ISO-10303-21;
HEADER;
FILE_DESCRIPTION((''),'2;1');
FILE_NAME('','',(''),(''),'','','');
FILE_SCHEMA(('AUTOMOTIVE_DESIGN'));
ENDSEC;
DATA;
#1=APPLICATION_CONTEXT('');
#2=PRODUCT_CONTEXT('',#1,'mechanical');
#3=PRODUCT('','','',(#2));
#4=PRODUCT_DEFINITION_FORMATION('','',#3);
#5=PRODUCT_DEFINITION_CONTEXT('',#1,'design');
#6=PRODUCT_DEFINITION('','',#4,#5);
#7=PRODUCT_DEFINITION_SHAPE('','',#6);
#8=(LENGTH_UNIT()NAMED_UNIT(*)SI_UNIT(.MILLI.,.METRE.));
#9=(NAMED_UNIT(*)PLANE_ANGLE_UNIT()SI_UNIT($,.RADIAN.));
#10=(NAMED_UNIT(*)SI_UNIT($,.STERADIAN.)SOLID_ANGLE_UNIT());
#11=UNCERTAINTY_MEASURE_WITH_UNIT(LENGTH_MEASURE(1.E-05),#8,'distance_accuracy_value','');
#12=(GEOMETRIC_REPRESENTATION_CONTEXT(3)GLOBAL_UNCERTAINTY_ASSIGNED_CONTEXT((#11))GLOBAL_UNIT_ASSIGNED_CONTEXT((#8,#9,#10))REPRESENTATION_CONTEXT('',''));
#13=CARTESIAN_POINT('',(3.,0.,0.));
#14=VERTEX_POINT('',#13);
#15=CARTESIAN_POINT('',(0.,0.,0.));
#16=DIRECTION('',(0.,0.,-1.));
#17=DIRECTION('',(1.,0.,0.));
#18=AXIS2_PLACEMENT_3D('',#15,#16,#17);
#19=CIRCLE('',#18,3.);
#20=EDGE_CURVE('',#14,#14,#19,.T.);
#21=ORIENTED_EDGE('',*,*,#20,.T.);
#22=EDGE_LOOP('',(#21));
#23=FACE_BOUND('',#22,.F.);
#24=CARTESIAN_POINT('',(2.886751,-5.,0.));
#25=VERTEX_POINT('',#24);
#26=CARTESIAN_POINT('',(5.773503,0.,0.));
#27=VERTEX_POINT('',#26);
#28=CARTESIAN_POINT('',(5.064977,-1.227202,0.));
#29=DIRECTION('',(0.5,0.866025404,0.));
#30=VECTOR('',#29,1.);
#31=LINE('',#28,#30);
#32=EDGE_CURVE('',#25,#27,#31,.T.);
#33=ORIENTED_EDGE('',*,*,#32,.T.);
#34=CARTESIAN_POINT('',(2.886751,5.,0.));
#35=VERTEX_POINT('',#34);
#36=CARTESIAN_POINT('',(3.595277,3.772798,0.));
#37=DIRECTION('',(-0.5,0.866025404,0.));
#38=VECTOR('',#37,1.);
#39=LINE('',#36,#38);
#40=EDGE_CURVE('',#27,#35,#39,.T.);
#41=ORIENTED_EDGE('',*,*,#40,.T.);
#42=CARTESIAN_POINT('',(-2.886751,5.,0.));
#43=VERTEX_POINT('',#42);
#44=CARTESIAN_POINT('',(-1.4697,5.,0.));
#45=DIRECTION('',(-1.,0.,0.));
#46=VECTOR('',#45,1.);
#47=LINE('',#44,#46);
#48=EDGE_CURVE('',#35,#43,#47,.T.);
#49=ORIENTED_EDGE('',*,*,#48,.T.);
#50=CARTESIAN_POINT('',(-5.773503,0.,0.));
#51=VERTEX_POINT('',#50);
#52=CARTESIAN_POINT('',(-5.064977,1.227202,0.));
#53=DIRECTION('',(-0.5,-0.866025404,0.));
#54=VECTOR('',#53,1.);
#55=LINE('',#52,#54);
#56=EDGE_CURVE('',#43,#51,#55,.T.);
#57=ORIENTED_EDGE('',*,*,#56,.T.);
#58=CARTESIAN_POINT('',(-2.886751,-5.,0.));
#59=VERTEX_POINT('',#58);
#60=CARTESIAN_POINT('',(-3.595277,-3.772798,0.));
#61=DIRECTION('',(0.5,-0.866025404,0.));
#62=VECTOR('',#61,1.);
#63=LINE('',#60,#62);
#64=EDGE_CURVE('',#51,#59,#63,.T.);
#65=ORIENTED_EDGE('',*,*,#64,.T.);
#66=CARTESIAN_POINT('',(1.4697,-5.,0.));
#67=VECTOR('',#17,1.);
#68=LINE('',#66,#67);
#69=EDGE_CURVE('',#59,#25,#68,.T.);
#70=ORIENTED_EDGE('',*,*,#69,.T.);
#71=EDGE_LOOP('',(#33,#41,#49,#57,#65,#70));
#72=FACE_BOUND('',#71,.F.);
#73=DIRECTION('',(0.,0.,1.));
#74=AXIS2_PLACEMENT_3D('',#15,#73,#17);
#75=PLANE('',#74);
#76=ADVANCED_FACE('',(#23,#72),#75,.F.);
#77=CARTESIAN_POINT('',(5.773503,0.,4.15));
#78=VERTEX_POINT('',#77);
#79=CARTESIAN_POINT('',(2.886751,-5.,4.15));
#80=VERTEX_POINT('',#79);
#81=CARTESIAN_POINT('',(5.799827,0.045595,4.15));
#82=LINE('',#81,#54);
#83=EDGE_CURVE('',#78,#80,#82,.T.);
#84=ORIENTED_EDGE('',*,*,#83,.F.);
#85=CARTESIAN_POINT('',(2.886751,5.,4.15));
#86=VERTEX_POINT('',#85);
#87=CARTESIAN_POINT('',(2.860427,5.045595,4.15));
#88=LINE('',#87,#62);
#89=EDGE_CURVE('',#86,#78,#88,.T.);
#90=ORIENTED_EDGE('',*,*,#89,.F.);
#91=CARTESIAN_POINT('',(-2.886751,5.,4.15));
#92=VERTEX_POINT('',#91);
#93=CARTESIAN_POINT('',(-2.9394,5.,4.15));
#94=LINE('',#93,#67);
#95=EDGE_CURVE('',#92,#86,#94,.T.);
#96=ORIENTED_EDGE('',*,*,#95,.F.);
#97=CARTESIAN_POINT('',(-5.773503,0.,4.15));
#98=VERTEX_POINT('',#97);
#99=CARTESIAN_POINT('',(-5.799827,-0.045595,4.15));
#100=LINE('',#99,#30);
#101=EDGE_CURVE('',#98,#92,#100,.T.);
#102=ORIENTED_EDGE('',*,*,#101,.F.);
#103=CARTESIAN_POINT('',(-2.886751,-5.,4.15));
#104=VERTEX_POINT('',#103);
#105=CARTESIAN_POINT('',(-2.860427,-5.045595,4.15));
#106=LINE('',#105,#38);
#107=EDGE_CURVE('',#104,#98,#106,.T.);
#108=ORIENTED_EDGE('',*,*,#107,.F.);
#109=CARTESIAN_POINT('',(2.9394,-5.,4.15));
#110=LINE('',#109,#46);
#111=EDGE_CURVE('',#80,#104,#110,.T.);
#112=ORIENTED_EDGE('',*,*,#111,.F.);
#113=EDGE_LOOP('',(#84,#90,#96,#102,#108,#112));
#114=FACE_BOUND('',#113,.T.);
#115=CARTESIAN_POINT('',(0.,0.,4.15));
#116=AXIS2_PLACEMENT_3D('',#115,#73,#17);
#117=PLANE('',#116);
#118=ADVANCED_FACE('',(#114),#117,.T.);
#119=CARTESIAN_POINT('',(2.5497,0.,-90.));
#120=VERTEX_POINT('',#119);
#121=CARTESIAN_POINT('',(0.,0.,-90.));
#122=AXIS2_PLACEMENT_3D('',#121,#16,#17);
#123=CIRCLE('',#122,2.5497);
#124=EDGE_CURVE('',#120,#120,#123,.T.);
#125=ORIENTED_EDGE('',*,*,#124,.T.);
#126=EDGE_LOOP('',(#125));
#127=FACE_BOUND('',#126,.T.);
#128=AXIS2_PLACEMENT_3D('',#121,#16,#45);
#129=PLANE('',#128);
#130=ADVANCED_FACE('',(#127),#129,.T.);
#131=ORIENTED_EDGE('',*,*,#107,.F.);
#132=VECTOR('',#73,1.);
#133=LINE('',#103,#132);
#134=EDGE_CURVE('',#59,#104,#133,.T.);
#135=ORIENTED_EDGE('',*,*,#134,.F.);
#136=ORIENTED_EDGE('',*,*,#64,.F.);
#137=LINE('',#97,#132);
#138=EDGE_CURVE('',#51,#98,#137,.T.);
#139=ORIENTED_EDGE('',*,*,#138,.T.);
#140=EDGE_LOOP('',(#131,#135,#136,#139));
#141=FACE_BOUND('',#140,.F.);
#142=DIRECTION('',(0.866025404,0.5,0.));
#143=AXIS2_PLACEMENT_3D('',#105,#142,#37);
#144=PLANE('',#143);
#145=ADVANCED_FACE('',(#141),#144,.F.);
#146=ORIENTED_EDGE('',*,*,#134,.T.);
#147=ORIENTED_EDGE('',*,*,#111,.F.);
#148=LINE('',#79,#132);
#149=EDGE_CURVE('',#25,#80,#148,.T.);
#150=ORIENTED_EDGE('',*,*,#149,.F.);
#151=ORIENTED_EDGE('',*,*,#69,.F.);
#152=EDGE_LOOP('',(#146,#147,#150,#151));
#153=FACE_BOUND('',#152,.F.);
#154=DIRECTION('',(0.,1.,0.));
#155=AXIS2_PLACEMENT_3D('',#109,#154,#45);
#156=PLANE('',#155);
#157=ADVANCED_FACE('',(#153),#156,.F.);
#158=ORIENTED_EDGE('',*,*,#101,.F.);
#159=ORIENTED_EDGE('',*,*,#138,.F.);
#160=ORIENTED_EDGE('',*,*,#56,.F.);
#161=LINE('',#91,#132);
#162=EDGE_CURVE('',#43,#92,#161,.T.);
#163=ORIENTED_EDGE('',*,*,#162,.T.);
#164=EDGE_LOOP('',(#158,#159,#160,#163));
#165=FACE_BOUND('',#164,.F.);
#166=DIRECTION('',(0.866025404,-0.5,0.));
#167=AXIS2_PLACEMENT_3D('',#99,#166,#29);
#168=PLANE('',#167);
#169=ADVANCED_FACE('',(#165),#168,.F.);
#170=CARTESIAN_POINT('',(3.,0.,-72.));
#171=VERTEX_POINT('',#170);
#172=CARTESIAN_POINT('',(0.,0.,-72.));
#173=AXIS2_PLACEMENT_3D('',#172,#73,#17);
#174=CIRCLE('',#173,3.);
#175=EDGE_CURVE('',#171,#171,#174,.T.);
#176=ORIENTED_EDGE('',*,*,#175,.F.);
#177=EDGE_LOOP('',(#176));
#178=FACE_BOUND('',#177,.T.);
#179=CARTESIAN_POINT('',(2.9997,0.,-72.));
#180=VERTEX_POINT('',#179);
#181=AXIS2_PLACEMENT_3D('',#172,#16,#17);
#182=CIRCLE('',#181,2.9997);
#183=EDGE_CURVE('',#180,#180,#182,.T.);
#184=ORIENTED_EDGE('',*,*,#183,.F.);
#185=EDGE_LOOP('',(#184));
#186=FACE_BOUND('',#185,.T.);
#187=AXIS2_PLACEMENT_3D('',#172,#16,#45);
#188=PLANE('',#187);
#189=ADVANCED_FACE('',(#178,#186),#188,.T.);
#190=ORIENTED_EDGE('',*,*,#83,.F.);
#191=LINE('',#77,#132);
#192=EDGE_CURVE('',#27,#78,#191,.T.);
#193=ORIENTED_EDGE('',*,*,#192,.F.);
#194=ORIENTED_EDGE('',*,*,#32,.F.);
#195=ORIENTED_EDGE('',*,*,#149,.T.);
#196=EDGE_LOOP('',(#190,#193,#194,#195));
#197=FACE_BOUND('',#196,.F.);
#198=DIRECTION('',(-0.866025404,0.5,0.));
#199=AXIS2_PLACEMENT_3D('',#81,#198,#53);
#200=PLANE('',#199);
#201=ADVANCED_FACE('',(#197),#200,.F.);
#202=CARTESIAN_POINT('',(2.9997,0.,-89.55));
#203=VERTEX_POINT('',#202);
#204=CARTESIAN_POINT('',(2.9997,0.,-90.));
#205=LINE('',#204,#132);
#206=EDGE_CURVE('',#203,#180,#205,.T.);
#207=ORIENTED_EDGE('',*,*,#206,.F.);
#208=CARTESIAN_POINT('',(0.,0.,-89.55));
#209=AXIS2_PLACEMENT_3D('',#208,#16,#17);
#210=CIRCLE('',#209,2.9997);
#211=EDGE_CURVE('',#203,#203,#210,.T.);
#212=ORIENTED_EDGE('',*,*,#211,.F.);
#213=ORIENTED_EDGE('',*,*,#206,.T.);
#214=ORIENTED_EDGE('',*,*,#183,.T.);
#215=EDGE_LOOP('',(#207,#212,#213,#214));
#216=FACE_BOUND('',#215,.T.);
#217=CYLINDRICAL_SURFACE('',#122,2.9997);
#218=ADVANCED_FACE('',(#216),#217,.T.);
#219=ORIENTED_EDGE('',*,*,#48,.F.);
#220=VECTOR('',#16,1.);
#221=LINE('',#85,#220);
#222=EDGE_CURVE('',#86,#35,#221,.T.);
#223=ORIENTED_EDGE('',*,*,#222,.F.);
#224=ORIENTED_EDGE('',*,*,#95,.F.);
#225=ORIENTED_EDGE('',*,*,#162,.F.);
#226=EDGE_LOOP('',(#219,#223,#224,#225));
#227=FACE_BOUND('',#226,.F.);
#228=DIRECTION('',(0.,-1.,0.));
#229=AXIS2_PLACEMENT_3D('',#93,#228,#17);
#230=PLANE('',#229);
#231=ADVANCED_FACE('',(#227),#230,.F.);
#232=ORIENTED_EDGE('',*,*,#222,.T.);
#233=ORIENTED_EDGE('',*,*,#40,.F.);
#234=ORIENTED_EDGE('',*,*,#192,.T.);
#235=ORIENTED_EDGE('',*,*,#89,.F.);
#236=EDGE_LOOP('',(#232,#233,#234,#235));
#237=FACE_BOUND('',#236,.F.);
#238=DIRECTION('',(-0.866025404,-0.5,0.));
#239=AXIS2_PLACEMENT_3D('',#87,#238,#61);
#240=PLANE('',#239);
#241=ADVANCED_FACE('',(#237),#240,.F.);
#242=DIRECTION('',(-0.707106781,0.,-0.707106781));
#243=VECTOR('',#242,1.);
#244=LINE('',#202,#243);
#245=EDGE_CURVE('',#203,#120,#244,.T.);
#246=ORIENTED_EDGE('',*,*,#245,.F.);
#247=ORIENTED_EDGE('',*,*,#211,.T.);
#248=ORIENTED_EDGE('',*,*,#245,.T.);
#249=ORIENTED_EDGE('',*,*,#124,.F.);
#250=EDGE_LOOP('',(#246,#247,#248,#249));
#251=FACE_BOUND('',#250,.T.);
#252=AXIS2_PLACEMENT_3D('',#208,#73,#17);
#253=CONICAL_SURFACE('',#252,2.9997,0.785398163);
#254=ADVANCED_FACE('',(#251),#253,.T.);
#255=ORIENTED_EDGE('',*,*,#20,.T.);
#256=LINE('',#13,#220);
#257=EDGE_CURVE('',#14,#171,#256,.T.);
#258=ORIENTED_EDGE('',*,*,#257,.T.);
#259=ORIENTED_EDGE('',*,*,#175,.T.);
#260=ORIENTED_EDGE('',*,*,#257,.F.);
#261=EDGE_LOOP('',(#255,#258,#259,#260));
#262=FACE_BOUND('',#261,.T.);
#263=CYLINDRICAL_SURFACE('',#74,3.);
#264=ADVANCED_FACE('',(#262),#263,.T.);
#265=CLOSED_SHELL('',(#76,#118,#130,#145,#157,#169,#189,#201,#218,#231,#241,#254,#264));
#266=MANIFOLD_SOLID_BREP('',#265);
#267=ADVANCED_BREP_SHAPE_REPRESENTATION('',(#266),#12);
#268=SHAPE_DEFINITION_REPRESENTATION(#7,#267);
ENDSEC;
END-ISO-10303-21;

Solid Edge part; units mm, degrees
sketch "Sketch1" plane through (0, 0, 0) normal (0, 0, 1) x (1, 0, 0)
  circle A0 centre (0, 0) radius 5.8
  dimension "D1" = 11.6
extrude "Protrusion1" add sketch "Sketch1" along normal blind 4.15
sketch "Sketch2" plane through (0, 0, 0) normal (0, 0, -1) x (1, 0, 0)
  circle A0 centre (0, 0) radius 3
extrude "Protrusion2" add sketch "Sketch2" along normal blind 90
sketch "Sketch3" plane through (0, 0, -90) normal (0, 0, -1) x (1, 0, 0)
  circle A0 centre (0, 0) radius 2.9997
extrude "Cutout1" cut sketch "Sketch3" against normal blind 18 flip side to cut
chamfer "Chamfer_1" distance 0.45 angle 45 1 edges at (-2.9997, 0, -90)
sketch "Sketch4" plane through (0, 0, 4.15) normal (0, 0, 1) x (1, 0, 0)
  line L0 (-2.9394, 5) -> (2.9394, 5)
  dimension "D1" = 10
extrude "Cutout2" cut sketch "Sketch4" against normal up to next material side at (0, 5.05, 4.15)
pattern_circular "Pattern1" count 6 over 360 about axis through (0, 0, 4.15) along (0, 0, 1) of "Cutout2"
properties part number "24104500"
